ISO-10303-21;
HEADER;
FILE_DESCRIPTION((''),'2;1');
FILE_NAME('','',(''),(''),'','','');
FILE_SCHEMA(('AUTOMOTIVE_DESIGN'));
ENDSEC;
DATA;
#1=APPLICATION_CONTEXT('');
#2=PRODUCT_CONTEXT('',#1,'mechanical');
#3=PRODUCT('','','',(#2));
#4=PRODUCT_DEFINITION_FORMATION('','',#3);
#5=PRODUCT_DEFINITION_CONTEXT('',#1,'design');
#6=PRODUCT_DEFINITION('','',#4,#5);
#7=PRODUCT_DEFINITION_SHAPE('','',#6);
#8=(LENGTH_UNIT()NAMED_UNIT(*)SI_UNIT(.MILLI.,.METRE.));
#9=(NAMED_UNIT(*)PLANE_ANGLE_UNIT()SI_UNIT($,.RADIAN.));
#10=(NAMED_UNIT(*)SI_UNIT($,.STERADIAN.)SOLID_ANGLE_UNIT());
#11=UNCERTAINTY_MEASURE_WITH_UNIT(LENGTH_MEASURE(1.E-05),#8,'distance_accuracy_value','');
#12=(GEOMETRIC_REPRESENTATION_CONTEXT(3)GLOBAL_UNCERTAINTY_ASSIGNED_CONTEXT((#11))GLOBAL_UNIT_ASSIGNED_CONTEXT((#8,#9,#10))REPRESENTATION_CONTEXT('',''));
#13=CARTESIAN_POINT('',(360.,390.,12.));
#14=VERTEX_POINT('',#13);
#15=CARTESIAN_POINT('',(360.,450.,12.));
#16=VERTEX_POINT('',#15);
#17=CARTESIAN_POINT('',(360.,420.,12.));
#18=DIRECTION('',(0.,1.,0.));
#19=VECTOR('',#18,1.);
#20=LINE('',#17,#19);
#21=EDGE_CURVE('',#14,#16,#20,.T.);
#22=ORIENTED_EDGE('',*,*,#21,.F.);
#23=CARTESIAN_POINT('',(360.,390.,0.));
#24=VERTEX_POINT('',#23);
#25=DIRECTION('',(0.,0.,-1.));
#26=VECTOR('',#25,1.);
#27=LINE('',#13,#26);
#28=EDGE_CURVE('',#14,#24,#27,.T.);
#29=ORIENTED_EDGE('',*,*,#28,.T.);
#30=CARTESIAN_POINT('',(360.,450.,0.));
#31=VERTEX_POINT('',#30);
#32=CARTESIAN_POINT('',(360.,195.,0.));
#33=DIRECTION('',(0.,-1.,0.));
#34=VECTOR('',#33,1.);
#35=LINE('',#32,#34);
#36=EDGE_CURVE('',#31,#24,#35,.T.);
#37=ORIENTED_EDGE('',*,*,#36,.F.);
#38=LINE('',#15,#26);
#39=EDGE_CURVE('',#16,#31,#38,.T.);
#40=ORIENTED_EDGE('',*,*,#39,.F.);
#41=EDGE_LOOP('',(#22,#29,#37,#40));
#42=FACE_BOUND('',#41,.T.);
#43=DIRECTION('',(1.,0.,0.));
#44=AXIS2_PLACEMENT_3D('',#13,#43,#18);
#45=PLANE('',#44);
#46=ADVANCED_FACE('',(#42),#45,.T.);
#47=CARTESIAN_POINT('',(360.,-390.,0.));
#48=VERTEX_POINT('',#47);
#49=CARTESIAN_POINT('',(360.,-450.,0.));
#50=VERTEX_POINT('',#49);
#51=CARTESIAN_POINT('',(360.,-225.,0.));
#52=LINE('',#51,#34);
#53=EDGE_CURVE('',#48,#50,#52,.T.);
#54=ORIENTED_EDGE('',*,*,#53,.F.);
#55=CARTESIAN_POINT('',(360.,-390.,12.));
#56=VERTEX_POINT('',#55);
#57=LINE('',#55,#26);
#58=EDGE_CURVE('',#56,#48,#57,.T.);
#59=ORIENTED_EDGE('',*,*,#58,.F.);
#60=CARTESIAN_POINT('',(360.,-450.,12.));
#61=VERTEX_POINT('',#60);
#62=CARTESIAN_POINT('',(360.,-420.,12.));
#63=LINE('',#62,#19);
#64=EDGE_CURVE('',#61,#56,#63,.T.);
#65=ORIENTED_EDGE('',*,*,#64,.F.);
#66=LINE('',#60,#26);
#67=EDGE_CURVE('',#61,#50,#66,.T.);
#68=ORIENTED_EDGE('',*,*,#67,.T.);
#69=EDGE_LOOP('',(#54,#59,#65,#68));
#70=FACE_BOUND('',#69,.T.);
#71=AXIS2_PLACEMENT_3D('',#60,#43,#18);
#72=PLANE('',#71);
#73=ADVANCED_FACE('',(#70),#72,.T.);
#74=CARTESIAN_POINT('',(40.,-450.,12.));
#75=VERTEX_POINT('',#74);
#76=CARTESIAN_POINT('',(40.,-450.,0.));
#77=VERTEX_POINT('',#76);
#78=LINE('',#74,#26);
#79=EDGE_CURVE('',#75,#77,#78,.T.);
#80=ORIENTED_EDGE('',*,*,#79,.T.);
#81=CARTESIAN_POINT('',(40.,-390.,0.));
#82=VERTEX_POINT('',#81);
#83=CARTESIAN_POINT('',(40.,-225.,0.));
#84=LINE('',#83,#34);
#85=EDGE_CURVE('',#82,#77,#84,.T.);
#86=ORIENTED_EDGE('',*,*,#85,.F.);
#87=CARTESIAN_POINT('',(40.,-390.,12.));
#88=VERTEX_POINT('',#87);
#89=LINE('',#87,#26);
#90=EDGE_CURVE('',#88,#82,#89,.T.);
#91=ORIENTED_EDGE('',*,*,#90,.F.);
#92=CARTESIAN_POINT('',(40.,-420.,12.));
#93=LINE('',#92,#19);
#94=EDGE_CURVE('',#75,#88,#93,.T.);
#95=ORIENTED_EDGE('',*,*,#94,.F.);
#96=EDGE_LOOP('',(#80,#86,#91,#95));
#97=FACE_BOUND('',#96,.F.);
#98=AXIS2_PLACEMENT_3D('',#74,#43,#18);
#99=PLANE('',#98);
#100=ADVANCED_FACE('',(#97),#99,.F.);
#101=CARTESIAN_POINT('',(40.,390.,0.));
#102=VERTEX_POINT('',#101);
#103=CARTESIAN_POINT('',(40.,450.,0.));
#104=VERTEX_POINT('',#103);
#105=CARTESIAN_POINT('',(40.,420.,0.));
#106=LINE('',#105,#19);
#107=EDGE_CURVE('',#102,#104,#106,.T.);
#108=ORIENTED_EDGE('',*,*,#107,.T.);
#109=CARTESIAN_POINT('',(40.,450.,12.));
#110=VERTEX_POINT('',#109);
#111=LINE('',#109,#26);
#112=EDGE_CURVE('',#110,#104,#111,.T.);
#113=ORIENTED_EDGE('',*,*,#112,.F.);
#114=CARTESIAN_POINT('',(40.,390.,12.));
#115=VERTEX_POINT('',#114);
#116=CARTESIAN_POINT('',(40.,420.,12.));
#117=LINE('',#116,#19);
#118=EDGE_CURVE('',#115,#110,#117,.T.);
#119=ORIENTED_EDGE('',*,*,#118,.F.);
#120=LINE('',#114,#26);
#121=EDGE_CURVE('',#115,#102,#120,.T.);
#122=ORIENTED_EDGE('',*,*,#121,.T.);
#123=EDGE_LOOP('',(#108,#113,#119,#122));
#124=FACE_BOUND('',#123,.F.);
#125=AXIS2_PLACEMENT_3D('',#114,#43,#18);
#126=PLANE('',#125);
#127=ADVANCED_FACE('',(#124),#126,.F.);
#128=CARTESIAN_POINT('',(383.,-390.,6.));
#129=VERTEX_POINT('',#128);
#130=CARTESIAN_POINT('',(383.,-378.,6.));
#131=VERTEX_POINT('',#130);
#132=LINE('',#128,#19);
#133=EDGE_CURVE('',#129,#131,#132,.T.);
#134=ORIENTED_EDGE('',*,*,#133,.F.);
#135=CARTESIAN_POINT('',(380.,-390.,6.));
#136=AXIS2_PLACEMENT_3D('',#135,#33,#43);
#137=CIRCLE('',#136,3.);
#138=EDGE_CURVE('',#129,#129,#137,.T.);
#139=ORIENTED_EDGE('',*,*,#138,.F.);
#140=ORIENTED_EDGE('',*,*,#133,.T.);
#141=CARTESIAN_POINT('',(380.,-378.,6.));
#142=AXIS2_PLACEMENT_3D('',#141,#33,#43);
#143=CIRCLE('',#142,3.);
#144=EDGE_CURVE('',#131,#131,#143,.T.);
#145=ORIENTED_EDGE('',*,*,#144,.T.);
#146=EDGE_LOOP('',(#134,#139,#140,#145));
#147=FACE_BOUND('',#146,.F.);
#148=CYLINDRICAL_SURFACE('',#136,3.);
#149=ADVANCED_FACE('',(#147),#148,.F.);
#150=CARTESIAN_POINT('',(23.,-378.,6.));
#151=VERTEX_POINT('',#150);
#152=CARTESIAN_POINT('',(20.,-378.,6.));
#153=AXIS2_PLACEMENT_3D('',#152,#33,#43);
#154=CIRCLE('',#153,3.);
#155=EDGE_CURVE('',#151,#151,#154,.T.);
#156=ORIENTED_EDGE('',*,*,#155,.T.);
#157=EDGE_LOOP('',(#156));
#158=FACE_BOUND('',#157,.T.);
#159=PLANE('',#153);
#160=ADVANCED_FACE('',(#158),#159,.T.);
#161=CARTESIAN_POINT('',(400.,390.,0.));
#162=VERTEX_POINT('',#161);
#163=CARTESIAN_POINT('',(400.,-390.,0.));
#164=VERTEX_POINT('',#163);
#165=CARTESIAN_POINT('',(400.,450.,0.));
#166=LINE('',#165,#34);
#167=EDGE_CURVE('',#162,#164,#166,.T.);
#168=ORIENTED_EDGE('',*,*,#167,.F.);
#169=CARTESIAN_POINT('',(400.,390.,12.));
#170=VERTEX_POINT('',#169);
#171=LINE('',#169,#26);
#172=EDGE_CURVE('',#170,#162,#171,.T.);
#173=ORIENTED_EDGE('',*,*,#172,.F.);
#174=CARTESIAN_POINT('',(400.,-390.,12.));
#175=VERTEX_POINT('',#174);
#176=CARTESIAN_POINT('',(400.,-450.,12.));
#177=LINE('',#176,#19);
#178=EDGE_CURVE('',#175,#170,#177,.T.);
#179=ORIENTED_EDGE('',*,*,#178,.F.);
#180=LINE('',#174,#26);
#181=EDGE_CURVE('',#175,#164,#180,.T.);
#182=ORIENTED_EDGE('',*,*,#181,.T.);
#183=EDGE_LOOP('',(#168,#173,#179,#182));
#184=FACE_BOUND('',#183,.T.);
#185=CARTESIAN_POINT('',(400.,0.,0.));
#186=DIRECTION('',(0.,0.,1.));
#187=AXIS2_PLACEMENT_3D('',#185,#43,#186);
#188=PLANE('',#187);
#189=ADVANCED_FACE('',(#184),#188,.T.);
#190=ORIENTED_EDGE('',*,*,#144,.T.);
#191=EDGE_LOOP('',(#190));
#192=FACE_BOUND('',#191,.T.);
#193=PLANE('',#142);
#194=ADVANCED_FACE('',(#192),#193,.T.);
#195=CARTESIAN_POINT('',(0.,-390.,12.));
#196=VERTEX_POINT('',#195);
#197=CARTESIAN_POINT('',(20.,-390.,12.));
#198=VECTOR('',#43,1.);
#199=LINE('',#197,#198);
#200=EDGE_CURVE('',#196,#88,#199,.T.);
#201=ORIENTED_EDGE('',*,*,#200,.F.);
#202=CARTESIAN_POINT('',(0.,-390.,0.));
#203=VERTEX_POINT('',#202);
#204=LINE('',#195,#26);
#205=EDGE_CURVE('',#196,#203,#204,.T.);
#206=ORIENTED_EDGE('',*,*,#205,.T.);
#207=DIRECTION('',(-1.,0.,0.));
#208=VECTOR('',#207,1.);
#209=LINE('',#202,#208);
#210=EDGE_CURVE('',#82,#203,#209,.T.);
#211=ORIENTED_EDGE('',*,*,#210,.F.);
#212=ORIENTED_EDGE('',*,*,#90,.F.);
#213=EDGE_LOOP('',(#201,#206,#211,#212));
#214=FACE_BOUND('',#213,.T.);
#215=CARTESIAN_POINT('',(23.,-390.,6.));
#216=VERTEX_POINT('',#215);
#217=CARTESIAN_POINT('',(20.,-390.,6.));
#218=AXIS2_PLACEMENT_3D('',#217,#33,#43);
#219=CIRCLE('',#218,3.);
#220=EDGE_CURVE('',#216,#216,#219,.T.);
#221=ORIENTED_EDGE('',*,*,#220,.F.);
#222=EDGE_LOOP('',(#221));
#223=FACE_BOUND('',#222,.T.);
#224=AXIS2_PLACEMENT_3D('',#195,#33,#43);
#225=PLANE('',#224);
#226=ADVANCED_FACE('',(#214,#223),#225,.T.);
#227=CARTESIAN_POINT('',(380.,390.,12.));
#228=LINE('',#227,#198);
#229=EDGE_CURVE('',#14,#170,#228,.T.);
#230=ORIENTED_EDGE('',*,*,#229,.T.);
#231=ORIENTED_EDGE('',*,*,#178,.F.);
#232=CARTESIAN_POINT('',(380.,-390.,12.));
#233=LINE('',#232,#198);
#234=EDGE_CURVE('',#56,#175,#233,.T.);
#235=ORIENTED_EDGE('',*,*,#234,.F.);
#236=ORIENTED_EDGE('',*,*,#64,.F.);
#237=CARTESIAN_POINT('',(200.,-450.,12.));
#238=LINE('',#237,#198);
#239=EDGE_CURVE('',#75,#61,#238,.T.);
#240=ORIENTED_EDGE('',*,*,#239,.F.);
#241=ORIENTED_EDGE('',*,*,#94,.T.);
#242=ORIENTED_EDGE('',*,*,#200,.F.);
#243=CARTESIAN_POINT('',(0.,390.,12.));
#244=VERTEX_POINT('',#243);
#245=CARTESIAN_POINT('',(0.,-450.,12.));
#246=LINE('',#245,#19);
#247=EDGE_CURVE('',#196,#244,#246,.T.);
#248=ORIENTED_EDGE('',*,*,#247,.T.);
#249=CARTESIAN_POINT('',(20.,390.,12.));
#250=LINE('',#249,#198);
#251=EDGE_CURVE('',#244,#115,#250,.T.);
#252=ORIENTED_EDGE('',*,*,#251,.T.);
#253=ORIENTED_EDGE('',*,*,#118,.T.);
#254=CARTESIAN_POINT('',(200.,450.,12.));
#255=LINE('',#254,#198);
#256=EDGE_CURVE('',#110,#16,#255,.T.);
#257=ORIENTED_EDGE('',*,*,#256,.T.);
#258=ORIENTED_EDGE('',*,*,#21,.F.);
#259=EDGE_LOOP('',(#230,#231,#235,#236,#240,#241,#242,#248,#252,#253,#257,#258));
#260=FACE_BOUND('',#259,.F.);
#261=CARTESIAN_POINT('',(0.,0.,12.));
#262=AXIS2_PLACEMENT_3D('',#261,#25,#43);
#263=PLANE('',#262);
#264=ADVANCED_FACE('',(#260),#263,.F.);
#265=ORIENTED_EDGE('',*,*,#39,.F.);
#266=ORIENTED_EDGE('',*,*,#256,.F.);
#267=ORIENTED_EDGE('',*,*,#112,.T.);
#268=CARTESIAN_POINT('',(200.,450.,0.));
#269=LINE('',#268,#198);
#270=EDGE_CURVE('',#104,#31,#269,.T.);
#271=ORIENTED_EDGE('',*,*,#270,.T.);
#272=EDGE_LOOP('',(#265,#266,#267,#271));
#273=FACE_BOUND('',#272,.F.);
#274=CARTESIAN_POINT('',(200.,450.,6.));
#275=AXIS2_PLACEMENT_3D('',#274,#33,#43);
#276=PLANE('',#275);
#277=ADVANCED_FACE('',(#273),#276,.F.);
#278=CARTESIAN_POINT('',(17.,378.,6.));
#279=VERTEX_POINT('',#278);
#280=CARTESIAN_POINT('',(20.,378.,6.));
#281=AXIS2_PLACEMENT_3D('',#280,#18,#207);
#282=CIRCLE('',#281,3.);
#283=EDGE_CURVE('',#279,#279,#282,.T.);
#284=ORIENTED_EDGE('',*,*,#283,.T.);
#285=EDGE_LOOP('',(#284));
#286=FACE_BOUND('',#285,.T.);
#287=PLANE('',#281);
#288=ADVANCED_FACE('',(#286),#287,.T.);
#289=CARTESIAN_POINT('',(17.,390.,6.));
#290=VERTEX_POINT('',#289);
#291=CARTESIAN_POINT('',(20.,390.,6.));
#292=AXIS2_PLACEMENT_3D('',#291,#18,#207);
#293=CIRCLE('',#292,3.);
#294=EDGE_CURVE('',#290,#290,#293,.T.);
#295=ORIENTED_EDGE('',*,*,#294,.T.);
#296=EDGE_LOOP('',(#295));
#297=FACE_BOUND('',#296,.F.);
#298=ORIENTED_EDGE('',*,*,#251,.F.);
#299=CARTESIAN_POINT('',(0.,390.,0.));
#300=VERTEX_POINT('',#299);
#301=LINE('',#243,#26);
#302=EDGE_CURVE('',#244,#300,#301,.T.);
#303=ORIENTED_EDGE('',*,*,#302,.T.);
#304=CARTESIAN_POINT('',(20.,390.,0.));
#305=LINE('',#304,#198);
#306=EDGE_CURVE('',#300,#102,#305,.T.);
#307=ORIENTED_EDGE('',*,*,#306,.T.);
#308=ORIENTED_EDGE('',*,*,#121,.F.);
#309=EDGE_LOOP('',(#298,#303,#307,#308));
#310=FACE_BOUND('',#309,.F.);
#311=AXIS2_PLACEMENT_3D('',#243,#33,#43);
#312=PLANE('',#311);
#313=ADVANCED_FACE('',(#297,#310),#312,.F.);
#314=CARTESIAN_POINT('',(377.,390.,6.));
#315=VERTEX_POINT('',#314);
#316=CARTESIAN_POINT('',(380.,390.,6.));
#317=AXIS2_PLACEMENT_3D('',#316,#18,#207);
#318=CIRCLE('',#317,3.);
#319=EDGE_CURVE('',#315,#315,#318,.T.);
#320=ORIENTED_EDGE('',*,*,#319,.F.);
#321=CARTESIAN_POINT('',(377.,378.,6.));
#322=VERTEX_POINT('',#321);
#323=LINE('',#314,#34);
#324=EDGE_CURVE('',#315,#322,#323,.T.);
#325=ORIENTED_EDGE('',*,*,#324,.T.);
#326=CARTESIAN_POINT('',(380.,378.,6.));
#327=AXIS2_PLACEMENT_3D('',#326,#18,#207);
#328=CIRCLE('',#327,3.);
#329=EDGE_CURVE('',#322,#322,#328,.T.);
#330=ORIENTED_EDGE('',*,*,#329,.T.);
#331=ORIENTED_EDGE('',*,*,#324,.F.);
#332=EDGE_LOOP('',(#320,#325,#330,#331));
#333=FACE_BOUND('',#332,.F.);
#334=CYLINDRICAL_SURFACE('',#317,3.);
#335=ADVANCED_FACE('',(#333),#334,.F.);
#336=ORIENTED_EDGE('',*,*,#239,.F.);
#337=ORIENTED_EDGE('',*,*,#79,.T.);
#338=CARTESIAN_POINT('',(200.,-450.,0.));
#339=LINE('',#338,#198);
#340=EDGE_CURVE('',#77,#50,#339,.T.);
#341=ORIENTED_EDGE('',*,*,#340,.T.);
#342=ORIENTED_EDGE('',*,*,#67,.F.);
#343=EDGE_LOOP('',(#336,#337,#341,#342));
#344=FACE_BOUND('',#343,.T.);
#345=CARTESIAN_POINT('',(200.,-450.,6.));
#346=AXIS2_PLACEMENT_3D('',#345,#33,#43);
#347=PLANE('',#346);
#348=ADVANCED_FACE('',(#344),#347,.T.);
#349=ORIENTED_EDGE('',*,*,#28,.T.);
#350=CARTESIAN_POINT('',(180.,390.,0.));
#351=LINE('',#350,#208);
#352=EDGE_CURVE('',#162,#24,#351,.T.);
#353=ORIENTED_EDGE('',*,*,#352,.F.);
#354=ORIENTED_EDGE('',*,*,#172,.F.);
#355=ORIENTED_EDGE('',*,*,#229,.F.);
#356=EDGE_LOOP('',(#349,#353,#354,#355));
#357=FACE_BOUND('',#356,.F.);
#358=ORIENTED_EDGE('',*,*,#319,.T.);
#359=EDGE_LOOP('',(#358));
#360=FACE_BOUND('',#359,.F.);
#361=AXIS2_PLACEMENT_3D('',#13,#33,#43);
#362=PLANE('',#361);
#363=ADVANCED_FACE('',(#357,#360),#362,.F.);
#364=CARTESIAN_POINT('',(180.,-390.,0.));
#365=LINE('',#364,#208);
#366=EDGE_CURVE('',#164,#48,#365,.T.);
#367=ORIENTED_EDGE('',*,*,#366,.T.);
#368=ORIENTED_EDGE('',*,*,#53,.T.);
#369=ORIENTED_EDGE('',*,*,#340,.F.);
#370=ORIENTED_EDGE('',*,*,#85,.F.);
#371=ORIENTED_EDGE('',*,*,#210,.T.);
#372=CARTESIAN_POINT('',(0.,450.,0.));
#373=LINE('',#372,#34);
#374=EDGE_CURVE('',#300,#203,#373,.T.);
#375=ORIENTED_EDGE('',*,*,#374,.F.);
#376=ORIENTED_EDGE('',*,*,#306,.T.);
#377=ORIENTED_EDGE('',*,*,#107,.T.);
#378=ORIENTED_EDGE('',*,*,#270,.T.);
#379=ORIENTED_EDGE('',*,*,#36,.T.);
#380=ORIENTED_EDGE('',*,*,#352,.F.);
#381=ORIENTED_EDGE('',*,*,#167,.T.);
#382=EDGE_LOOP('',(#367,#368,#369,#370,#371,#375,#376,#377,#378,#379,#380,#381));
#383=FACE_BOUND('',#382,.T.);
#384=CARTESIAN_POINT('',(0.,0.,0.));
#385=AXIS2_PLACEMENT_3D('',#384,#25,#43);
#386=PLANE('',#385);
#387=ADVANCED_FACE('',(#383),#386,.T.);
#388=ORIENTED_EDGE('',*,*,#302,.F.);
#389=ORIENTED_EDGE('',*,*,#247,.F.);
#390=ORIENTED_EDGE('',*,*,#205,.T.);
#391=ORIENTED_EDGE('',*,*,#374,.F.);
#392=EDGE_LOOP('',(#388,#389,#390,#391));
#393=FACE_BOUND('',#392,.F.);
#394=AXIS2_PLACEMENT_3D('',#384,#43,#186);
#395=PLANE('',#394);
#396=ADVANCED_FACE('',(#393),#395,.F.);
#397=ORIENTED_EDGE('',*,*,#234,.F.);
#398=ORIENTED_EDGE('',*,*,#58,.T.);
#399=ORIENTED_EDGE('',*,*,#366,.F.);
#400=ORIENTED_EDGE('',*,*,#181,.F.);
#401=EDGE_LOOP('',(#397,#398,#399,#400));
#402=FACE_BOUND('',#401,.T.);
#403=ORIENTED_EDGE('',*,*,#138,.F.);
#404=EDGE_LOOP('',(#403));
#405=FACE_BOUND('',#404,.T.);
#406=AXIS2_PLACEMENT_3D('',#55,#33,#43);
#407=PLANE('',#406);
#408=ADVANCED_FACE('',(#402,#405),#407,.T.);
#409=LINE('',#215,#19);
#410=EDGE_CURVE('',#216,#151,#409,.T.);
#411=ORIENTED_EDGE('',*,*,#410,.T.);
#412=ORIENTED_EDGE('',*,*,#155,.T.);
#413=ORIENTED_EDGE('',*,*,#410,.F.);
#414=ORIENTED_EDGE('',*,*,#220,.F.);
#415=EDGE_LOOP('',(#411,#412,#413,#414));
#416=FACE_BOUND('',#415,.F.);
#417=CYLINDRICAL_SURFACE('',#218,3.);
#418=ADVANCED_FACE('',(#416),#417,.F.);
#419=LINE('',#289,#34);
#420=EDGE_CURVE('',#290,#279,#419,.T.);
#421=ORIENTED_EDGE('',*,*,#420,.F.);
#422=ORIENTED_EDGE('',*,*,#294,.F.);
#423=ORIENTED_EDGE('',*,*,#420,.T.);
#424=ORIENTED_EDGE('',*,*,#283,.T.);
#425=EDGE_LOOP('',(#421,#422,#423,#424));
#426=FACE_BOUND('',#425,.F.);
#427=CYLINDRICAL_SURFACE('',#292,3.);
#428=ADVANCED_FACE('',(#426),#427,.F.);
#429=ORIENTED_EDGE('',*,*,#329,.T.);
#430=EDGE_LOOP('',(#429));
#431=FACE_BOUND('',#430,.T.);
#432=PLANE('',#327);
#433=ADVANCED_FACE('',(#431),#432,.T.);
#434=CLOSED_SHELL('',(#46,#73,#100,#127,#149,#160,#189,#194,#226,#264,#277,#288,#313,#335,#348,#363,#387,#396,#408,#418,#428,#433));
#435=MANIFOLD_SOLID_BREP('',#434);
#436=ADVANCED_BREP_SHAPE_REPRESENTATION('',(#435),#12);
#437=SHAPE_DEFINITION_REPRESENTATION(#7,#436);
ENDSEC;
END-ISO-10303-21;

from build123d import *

# Parameters (mm, degrees)
F0_W      = 400
F0_H      = 12
F1_DEPTH  = 450
F2_W      = 40
F2_H      = 60
F3_DEPTH  = 12
F4_W      = 40
F4_H      = 60
F5_DEPTH  = 15
F6_W      = 40
F6_H      = 60
F7_DEPTH  = 15
F8_W      = 40
F8_H      = 60
F9_DEPTH  = 15
F10_R     = 3
F11_DEPTH = 12
F12_R     = 3
F13_DEPTH = 12
F14_R     = 3
F15_DEPTH = 12
F16_R     = 3
F17_DEPTH = 12


with BuildPart() as f1:
    # F0 (on Front) → F1 (new body, symmetric)
    with BuildSketch(Plane.XZ):
        with Locations((200, 6)):
            Rectangle(F0_W, F0_H)
    extrude(amount=F1_DEPTH, both=True)

    # F2 (on face) → F3 (cut)
    with BuildSketch(Plane.XY.offset(12)):
        with Locations((20, 420)):
            Rectangle(F2_W, F2_H)
    extrude(amount=-F3_DEPTH, mode=Mode.SUBTRACT)

    # F4 (on face) → F5 (cut)
    with BuildSketch(Plane.XY.offset(12)):
        with Locations((380, 420)):
            Rectangle(F4_W, F4_H)
    extrude(amount=-F5_DEPTH, mode=Mode.SUBTRACT)

    # F6 (on face) → F7 (cut)
    with BuildSketch(Plane.XY.offset(12)):
        with Locations((380, -420)):
            Rectangle(F6_W, F6_H)
    extrude(amount=-F7_DEPTH, mode=Mode.SUBTRACT)

    # F8 (on face) → F9 (cut)
    with BuildSketch(Plane.XY.offset(12)):
        with Locations((20, -420)):
            Rectangle(F8_W, F8_H)
    extrude(amount=-F9_DEPTH, mode=Mode.SUBTRACT)

    # F10 (on face) → F11 (cut)
    with BuildSketch(Plane.XZ.offset(390)):
        with Locations((20, 6)):
            Circle(F10_R)
    extrude(amount=-F11_DEPTH, mode=Mode.SUBTRACT)

    # F12 (on face) → F13 (cut)
    with BuildSketch(Plane.XZ.offset(390)):
        with Locations((380, 6)):
            Circle(F12_R)
    extrude(amount=-F13_DEPTH, mode=Mode.SUBTRACT)

    # F14 (on face) → F15 (cut)
    with BuildSketch(Plane(origin=(0, 390, 0), x_dir=(-1, 0, 0), z_dir=(0, 1, 0))):
        with Locations((-380, 6)):
            Circle(F14_R)
    extrude(amount=-F15_DEPTH, mode=Mode.SUBTRACT)

    # F16 (on face) → F17 (cut)
    with BuildSketch(Plane(origin=(0, 390, 0), x_dir=(-1, 0, 0), z_dir=(0, 1, 0))):
        with Locations((-20, 6)):
            Circle(F16_R)
    extrude(amount=-F17_DEPTH, mode=Mode.SUBTRACT)


solid = f1.part
